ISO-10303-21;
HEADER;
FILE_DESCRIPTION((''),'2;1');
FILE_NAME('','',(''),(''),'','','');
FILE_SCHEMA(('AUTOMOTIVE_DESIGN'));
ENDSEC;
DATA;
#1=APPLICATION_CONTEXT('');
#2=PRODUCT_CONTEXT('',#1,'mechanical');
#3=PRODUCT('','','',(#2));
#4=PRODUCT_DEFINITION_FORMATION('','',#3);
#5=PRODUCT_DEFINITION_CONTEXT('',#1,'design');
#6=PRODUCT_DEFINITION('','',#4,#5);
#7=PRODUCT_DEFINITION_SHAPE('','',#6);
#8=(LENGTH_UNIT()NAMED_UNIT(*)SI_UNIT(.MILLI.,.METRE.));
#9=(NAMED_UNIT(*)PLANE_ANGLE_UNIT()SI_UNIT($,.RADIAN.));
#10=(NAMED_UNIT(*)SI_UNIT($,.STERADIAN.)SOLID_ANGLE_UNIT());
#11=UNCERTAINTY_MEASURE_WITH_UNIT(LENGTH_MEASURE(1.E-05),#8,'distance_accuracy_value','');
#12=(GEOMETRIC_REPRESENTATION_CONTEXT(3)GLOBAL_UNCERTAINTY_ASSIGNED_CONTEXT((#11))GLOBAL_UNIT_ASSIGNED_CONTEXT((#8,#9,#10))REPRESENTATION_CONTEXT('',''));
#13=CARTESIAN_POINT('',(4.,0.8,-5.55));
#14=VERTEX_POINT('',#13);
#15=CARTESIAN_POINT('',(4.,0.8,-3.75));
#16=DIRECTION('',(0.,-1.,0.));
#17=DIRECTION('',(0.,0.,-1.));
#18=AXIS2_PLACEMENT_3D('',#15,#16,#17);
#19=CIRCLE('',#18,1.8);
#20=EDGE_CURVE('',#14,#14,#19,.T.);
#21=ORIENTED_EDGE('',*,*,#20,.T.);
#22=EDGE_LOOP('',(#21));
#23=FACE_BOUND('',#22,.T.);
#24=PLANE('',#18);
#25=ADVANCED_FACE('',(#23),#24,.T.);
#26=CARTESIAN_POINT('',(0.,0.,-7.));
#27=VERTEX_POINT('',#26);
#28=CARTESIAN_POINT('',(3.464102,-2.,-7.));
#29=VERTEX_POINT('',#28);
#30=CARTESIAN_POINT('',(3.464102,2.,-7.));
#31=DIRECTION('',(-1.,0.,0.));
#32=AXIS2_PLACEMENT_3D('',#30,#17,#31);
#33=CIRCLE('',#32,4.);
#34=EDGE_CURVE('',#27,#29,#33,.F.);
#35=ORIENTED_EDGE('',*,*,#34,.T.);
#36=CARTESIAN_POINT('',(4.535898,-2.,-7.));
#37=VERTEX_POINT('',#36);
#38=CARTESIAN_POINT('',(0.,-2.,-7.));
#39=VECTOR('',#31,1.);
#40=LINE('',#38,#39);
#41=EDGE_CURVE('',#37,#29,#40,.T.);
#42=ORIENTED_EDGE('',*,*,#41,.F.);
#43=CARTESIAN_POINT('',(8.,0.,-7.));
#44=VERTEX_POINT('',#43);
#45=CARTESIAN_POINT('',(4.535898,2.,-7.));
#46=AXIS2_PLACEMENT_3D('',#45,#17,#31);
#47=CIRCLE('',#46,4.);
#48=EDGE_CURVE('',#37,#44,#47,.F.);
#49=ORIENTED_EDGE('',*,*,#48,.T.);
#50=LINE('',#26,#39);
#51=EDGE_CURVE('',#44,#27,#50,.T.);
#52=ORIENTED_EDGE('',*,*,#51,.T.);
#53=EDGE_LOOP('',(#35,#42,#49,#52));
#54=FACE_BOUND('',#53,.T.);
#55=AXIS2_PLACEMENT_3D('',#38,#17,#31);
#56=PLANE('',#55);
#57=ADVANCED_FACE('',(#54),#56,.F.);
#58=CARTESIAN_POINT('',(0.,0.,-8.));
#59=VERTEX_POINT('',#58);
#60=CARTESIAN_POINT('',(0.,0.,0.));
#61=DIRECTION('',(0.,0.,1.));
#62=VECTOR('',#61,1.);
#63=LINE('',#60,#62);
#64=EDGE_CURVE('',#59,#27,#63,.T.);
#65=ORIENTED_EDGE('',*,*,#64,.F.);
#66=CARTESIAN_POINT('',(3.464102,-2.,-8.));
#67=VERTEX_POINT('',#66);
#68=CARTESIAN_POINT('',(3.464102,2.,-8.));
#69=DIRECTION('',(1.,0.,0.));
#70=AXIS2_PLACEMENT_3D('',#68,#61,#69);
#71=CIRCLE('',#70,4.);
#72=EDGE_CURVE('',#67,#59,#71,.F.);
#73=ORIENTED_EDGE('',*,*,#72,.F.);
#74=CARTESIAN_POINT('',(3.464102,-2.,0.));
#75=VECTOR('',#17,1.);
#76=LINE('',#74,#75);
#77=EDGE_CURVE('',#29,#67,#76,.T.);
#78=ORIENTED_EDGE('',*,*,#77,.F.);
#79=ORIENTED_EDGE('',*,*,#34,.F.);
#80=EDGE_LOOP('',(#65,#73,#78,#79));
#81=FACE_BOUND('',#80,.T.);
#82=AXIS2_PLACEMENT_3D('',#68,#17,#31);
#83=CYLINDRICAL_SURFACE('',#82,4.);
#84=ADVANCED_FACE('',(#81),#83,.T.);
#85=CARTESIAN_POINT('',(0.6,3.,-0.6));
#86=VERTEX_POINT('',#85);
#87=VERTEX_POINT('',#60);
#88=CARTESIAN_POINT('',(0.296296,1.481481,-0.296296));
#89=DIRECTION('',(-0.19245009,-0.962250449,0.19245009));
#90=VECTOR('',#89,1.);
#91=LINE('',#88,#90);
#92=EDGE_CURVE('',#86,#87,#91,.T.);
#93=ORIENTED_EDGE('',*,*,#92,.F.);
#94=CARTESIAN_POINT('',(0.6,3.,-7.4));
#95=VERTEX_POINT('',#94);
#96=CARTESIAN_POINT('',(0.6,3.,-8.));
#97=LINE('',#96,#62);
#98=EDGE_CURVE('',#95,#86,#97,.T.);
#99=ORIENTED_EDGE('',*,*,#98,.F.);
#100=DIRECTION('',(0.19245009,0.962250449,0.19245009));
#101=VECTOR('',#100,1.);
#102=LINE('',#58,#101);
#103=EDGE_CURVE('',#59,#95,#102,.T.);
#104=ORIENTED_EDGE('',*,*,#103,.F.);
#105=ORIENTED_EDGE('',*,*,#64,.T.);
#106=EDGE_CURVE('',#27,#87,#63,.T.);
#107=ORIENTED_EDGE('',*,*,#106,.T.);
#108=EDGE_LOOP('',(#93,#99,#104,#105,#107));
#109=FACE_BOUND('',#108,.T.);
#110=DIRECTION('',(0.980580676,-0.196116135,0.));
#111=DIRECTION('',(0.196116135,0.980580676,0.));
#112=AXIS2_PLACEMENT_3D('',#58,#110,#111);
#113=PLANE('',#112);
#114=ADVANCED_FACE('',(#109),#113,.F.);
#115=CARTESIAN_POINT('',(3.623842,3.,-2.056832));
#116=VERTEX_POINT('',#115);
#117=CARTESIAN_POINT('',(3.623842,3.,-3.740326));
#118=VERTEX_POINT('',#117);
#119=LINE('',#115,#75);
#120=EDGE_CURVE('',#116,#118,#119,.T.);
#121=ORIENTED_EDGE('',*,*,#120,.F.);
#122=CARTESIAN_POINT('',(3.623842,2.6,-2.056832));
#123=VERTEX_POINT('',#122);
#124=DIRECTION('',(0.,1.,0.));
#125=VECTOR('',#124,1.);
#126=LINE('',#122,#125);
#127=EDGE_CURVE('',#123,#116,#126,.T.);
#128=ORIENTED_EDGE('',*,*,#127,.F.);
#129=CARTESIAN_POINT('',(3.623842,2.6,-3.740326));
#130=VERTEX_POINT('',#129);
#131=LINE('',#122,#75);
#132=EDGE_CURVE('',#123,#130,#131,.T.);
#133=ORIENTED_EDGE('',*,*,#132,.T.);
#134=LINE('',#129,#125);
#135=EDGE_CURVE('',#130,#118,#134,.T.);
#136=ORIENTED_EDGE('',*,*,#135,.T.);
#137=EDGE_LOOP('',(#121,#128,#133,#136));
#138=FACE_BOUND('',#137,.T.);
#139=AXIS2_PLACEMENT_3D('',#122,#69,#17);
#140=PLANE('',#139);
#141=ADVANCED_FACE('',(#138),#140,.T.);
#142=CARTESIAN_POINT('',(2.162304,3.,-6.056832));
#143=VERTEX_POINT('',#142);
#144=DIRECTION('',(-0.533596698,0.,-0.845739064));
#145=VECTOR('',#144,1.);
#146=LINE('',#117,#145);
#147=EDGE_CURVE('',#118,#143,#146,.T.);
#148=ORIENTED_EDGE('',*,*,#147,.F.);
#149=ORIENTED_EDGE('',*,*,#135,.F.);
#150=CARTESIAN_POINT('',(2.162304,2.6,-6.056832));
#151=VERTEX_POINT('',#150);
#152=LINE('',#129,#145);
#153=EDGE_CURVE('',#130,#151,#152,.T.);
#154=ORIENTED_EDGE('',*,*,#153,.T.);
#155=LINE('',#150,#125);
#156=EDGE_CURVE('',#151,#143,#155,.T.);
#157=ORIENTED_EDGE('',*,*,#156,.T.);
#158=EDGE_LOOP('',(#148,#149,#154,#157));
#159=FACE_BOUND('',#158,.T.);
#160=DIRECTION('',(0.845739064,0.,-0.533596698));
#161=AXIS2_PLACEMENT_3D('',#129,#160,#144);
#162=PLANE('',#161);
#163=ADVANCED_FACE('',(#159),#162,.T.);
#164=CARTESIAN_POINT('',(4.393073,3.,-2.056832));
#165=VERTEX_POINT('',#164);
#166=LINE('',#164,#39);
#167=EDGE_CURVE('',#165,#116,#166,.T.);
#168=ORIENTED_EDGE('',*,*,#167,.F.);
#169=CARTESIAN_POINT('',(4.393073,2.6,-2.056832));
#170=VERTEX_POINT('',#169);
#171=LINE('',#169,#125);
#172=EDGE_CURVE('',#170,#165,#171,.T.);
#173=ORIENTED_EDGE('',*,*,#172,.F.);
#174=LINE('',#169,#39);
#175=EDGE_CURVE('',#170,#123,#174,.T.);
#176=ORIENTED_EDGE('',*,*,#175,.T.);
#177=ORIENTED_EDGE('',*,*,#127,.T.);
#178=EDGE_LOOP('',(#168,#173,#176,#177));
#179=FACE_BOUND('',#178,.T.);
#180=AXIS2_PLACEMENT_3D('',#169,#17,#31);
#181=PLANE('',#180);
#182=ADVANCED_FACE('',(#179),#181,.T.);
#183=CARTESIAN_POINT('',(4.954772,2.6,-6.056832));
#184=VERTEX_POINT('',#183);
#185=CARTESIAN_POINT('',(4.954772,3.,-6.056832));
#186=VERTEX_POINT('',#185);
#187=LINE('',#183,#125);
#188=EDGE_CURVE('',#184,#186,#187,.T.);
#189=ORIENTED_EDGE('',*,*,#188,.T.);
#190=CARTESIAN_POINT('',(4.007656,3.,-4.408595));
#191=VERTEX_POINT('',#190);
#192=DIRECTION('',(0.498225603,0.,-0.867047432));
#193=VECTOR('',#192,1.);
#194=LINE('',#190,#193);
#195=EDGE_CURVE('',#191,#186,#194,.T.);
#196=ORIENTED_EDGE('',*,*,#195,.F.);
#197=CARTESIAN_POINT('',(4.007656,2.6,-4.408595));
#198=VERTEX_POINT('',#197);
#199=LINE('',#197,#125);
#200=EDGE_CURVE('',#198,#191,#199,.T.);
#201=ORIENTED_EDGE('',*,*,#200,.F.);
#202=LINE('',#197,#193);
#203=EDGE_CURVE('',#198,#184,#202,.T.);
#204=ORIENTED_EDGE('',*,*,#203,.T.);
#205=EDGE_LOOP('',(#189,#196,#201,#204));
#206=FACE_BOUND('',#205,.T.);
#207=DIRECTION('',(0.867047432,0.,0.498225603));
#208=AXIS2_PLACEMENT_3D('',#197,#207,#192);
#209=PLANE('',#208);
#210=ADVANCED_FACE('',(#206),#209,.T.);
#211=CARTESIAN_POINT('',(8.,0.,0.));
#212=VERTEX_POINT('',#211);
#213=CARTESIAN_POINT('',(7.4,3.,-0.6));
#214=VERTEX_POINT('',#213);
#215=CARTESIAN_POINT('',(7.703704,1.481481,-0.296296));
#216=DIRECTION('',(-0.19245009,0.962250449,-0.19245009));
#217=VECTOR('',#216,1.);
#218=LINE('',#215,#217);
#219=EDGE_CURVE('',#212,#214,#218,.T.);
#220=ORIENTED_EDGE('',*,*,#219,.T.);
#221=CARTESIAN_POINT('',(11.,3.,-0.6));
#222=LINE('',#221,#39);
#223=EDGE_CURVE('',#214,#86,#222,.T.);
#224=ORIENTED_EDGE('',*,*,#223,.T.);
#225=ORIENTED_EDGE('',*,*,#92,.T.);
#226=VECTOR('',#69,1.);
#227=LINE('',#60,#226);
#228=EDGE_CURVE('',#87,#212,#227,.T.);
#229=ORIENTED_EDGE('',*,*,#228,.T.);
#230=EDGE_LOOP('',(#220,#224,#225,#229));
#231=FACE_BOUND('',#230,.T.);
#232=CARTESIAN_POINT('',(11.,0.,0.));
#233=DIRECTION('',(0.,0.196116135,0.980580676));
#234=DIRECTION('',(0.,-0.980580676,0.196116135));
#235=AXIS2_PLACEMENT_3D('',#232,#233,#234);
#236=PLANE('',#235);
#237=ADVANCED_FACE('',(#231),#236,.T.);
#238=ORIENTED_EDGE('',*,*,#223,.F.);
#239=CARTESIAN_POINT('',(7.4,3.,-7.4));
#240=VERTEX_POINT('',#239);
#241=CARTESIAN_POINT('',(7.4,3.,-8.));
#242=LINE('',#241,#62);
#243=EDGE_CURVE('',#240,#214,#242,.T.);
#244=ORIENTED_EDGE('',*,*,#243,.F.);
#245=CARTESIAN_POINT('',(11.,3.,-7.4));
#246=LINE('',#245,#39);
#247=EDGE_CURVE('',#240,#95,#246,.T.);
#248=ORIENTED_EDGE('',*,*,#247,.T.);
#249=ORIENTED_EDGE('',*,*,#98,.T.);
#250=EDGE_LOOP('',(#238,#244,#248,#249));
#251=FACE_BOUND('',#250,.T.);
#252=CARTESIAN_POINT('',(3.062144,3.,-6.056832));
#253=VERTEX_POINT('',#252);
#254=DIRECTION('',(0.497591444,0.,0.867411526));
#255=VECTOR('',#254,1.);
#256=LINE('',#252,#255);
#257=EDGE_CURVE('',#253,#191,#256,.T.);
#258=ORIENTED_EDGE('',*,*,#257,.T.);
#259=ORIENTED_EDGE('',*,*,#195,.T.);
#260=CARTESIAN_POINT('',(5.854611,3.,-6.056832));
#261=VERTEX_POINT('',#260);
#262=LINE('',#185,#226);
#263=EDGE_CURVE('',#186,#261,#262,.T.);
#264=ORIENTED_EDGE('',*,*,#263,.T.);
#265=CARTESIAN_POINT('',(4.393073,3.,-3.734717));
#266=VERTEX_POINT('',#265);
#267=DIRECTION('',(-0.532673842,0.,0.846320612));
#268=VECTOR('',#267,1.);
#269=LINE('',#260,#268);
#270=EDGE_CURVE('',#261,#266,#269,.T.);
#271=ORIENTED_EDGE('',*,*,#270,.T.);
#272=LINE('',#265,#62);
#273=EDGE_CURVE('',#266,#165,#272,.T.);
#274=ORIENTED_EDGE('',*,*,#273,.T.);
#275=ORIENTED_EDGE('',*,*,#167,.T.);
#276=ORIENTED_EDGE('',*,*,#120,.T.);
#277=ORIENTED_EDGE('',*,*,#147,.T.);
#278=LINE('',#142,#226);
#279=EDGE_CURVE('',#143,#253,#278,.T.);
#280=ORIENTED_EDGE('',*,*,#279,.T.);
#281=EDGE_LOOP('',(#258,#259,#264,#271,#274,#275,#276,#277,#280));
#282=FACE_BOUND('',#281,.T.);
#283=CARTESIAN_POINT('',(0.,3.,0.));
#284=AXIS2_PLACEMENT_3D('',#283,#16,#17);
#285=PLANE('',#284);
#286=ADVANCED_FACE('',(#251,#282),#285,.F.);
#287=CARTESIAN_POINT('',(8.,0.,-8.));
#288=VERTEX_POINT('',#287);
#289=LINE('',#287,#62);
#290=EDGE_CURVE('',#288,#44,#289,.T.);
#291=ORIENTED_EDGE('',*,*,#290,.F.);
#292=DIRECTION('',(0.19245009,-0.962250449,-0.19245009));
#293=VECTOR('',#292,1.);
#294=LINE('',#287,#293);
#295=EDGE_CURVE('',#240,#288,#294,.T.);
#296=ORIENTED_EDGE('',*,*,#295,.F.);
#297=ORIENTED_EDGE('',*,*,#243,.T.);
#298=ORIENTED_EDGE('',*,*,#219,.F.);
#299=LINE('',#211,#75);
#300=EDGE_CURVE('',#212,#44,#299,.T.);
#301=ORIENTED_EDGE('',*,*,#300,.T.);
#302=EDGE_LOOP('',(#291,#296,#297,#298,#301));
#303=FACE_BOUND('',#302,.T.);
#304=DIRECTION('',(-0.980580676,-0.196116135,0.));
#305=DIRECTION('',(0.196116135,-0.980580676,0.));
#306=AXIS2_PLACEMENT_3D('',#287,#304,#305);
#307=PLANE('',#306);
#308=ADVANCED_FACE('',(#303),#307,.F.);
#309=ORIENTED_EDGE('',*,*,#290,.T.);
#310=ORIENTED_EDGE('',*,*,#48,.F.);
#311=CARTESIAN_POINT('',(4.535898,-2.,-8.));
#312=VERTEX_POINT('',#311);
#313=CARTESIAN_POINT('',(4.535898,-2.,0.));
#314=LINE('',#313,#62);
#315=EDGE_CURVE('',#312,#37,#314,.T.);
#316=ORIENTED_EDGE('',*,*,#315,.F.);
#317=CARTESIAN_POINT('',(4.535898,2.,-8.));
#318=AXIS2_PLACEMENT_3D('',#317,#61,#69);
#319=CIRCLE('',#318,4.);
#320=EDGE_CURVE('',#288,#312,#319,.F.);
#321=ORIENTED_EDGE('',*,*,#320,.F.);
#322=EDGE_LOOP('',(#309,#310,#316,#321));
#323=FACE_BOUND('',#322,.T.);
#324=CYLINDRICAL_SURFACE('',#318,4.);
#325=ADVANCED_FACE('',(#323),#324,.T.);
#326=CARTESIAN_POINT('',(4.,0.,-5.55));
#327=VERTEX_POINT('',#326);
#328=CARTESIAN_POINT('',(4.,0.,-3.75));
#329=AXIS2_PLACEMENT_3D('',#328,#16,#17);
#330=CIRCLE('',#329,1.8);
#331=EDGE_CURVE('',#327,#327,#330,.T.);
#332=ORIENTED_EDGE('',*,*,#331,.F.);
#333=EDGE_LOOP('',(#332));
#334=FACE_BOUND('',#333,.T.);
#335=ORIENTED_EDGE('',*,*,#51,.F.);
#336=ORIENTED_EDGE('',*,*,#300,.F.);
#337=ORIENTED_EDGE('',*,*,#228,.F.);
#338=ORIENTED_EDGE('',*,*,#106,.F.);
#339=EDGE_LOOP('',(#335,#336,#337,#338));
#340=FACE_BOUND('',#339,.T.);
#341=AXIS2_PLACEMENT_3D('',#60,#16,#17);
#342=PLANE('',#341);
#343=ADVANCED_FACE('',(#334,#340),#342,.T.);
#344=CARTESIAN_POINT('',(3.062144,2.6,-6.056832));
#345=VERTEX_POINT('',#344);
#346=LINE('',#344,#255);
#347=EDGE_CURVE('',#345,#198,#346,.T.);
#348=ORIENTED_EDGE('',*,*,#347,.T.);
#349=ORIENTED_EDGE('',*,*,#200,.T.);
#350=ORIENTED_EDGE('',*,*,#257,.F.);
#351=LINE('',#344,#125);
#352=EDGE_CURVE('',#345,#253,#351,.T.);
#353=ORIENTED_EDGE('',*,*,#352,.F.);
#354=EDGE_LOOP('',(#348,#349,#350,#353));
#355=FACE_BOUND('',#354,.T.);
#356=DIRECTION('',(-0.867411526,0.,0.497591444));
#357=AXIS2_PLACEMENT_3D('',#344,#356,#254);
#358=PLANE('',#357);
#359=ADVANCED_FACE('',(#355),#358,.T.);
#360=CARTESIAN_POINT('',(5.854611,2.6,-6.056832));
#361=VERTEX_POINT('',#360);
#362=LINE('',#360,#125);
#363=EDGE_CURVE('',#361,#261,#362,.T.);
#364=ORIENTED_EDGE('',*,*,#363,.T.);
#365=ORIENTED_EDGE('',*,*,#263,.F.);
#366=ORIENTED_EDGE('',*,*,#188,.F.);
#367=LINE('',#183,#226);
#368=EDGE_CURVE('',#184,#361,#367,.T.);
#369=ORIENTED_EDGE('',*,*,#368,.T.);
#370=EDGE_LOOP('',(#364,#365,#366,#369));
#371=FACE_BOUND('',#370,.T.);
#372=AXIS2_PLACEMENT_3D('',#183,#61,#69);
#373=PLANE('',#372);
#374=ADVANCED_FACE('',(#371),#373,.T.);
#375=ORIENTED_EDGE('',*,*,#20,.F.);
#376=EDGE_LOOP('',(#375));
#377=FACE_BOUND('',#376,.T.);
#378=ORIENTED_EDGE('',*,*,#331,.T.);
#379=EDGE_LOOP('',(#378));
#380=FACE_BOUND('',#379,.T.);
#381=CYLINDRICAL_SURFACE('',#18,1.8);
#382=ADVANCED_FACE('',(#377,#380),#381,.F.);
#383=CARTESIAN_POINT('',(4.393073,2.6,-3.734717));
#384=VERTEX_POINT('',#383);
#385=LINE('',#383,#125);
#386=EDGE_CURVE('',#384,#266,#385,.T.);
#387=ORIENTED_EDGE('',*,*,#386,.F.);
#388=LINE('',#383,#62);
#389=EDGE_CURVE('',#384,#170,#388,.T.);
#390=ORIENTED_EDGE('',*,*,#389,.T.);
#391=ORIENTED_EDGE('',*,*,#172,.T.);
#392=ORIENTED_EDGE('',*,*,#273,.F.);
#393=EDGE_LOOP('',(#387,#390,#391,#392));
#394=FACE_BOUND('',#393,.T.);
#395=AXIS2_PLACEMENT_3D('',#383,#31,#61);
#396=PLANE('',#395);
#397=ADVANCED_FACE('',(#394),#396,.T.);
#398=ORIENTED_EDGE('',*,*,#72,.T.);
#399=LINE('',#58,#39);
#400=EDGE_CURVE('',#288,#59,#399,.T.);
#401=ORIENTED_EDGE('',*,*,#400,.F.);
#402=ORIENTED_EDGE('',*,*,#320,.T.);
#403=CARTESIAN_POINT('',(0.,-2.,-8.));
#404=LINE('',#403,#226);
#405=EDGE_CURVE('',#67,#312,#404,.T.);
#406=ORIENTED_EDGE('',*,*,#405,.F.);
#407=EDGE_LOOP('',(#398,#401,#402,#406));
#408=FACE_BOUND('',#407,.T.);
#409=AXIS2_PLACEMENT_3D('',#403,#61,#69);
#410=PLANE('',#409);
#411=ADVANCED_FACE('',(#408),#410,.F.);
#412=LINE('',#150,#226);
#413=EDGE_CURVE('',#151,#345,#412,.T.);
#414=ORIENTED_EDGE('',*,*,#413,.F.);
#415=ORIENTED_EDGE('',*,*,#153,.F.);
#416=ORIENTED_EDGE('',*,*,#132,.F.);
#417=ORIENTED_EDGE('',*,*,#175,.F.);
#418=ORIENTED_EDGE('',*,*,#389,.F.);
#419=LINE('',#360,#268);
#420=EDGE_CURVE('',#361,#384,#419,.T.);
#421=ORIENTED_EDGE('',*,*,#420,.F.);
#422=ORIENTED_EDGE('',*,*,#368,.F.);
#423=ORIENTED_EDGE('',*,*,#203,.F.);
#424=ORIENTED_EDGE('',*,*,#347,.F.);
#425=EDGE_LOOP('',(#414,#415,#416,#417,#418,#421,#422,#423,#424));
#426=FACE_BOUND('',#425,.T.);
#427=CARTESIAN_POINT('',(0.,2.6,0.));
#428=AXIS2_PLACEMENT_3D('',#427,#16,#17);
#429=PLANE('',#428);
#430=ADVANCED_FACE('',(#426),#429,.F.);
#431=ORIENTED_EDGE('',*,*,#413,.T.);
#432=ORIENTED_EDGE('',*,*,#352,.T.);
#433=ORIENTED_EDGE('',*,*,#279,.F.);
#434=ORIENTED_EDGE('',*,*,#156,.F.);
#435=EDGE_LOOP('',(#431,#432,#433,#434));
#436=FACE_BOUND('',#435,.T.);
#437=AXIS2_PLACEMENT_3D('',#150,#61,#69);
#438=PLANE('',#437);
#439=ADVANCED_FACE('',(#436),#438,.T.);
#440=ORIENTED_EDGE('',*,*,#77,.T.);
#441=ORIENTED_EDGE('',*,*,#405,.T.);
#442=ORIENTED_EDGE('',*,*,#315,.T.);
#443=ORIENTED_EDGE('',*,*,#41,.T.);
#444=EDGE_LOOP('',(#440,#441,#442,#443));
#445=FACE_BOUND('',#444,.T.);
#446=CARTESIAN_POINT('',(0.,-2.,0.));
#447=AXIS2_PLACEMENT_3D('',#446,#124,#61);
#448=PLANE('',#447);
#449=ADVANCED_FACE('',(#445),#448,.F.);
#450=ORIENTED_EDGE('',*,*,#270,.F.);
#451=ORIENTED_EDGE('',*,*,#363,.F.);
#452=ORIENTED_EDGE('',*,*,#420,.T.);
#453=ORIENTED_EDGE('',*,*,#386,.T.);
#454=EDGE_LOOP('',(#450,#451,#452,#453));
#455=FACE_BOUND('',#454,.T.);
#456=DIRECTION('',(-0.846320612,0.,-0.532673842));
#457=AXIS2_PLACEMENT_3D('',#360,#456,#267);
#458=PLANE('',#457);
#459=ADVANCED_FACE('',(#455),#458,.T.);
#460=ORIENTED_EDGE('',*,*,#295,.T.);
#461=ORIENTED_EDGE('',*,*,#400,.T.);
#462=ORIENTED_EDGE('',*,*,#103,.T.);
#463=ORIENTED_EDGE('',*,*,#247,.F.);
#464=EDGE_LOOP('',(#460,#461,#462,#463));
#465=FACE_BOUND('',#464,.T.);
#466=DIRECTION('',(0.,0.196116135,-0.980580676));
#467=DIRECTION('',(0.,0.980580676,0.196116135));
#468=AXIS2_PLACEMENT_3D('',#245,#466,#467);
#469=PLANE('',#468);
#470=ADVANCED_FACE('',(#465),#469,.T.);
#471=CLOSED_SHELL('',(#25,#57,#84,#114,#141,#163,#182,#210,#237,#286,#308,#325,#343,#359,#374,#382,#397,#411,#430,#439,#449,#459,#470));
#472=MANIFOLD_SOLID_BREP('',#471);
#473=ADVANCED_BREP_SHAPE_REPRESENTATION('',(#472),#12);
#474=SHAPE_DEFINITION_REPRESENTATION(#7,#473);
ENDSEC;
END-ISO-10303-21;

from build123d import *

# Parameters (mm, degrees)
SKETCH1_W               = 8
SKETCH1_H               = 8
BOSS_EXTRUDE1_DEPTH     = 3
CUT_EXTRUDE1_DEPTH      = 12.704699911
CUT_EXTRUDE1_DEPTH_BACK = 12.704699911
CUT_EXTRUDE2_DEPTH      = 11
SKETCH4_R               = 1.8
CUT_EXTRUDE3_DEPTH      = 0.8
SKETCH5_W               = 8
SKETCH5_H               = 1
BOSS_EXTRUDE2_DEPTH     = 2
FILLET1_R               = 4
CUT_EXTRUDE4_DEPTH      = 0.4


with BuildPart() as part:
    # Sketch1 → Boss-Extrude1 (new body)
    with BuildSketch(Plane(origin=(0, 0, 0), x_dir=(1, 0, 0), z_dir=(0, 1, 0))):
        with Locations((4, 4)):
            Rectangle(SKETCH1_W, SKETCH1_H)
    extrude(amount=BOSS_EXTRUDE1_DEPTH)

    # Sketch2 → Cut-Extrude1 (cut, two sides: drawn at the far end of the back side and taken through both)
    with BuildSketch(Plane.XY.offset(-CUT_EXTRUDE1_DEPTH_BACK)):
        Polygon((0, 0), (0.6, 3), (0, 3), align=None)
        Polygon((8, 0), (7.4, 3), (8, 3), align=None)
    extrude(amount=CUT_EXTRUDE1_DEPTH + CUT_EXTRUDE1_DEPTH_BACK, mode=Mode.SUBTRACT)

    # Sketch3 → Cut-Extrude2 (cut)
    with BuildSketch(Plane(origin=(0, 0, 0), x_dir=(0, 0, -1), z_dir=(1, 0, 0))):
        Polygon((0, 0), (0.6, 3), (0, 3), align=None)
        Polygon((8, 3), (7.4, 3), (8, 0), align=None)
    extrude(amount=CUT_EXTRUDE2_DEPTH, mode=Mode.SUBTRACT)

    # Sketch4 → Cut-Extrude3 (cut)
    with BuildSketch(Plane.XZ):
        with Locations(Location((4, -3.75, 0), (0, 0, 270))):
            Circle(SKETCH4_R)
    extrude(amount=-CUT_EXTRUDE3_DEPTH, mode=Mode.SUBTRACT)

    # Sketch5 → Boss-Extrude2 (add)
    with BuildSketch(Plane.XZ):
        with Locations((4, -7.5)):
            Rectangle(SKETCH5_W, SKETCH5_H)
    extrude(amount=BOSS_EXTRUDE2_DEPTH)

    # Fillet1
    # the kernel refuses this fillet: 4 mm, written as the material it takes off along each edge
    with BuildSketch(Plane(origin=(8, -2, -16.660254038), x_dir=(0, 1, 0), z_dir=(0, 0, 1)), Plane(origin=(0, -2, 1.660254038), x_dir=(0, 1, 0), z_dir=(0, 0, -1))) as fillet1_piece_1:
        with BuildLine():
            CenterArc((4, 3.464101615), FILLET1_R, 180, 60)
            Line((0, 3.464101615), (-0.08, 3.464101615))
            Line((-0.08, 3.464101615), (-0.08, 0))
            Line((-0.08, 0), (0, -0.08))
            ThreePointArc((0, -0.08), (1, -0.08), (1.96, -0.069282032))
            Line((1.96, -0.069282032), (2, 0))
        make_face()
    extrude(amount=18.320508076, mode=Mode.SUBTRACT)

    # Sketch6 → Cut-Extrude4 (cut)
    with BuildSketch(Plane(origin=(0, 3, 0), x_dir=(1, 0, 0), z_dir=(0, 1, 0))):
        Polygon((3.623842243, 2.056832464), (3.623842243, 3.740326053), (2.162303782, 6.056832464), (3.062143525, 6.056832464), (4.007656346, 4.408595284), (4.95477173, 6.056832464), (5.854611474, 6.056832464), (4.393073013, 3.734717079), (4.393073013, 2.056832464), align=None)
    extrude(amount=-CUT_EXTRUDE4_DEPTH, mode=Mode.SUBTRACT)


solid = part.part
